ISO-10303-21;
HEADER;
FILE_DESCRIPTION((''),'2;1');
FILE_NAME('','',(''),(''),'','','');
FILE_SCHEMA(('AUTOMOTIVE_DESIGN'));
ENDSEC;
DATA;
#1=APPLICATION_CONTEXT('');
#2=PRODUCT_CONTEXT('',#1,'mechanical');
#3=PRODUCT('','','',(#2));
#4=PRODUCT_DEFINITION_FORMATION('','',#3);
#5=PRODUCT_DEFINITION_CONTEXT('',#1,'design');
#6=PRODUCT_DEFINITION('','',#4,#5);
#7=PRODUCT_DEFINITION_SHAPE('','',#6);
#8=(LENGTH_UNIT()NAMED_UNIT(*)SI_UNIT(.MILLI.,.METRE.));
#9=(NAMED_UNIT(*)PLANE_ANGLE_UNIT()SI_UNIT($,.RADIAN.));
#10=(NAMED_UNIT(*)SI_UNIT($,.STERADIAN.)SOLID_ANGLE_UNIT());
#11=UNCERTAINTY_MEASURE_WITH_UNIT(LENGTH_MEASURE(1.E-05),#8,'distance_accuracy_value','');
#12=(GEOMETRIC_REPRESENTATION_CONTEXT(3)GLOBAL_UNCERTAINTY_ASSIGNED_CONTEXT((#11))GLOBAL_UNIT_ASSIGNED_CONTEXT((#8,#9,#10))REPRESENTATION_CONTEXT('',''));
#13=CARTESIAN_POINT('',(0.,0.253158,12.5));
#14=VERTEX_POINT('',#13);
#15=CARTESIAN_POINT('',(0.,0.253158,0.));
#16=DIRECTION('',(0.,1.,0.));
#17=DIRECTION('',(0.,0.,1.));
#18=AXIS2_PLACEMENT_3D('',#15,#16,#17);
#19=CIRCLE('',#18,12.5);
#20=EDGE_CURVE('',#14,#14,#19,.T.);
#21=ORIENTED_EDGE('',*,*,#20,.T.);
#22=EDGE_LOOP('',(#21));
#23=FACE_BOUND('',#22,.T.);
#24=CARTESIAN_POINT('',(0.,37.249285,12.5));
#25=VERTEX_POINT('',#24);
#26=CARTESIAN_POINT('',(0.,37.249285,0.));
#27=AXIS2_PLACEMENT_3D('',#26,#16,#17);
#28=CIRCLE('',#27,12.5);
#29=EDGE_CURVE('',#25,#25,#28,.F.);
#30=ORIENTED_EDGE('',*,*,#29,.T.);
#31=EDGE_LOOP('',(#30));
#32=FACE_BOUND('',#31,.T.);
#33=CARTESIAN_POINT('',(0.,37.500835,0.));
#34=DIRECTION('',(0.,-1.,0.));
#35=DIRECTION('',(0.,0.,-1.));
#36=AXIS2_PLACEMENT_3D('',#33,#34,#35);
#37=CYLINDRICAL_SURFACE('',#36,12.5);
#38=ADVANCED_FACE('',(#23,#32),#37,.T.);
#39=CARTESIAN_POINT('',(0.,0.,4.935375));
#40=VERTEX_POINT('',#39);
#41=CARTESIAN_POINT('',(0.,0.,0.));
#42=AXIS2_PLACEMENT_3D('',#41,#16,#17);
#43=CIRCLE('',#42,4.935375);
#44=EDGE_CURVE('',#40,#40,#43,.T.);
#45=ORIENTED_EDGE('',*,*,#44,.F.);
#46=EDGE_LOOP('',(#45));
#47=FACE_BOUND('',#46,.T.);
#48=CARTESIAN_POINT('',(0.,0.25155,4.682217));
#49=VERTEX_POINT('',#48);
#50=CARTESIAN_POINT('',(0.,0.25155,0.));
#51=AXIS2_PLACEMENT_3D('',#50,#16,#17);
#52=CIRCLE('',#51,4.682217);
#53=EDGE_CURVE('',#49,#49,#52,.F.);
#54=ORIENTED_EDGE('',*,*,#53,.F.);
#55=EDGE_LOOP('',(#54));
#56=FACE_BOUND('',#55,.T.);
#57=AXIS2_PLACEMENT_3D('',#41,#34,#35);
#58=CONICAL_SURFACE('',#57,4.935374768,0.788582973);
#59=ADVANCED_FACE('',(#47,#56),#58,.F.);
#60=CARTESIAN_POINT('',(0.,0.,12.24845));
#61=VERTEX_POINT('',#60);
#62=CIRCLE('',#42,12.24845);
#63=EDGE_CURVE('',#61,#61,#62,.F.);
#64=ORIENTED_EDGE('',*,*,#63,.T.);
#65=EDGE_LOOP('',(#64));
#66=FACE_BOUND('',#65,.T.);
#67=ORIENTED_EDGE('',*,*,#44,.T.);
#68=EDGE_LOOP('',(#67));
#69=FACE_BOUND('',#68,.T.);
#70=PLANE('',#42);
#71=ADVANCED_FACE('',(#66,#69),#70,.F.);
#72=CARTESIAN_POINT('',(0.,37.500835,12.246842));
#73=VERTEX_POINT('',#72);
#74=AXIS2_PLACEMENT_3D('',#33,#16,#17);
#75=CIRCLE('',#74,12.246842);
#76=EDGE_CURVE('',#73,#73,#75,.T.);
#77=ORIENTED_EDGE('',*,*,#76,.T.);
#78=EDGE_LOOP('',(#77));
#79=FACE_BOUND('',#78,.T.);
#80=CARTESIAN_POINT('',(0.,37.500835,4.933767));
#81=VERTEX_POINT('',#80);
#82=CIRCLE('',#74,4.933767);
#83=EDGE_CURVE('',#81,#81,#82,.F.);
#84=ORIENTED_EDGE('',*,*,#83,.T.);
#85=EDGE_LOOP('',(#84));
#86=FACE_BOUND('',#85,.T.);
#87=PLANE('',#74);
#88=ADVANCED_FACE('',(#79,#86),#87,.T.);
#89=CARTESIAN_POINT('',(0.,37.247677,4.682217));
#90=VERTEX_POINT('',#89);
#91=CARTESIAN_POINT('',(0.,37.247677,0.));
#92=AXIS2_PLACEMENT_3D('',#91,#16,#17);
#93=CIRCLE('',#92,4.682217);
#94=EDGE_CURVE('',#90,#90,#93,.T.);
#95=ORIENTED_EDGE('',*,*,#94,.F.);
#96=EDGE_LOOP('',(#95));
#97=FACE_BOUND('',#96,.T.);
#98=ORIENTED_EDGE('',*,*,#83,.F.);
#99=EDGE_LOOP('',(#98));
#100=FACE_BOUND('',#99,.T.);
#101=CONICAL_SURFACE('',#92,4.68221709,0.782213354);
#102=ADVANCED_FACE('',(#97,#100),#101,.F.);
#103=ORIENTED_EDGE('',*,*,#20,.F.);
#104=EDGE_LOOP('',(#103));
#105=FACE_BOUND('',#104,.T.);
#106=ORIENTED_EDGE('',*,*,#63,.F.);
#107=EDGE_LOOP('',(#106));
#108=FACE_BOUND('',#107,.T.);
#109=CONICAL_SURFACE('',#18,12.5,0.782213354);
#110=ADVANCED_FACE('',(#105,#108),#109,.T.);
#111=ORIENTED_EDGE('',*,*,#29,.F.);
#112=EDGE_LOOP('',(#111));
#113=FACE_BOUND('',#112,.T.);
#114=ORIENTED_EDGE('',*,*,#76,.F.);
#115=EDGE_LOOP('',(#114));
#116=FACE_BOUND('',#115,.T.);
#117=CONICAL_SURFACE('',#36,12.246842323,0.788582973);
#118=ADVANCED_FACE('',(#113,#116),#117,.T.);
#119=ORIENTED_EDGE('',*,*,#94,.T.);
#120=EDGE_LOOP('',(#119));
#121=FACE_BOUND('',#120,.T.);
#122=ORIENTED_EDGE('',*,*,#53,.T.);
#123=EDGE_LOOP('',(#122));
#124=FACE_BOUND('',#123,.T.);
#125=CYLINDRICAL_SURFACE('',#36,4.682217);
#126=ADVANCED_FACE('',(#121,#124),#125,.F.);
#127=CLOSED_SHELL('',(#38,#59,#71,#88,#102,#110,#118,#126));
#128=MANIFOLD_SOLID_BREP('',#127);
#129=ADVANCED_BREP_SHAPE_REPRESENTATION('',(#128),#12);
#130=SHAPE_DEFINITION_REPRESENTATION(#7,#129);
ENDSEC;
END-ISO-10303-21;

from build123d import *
from OCP.BRepFilletAPI import BRepFilletAPI_MakeChamfer

# Parameters (mm, degrees)
SKETCH1_R           = 12.5
BOSS_EXTRUDE1_DEPTH = 37.500835042
SKETCH2_R           = 4.68221709
CUT_EXTRUDE1_DEPTH  = 42.458565205
CHAMFER1_SIZE       = 0.251550273
CHAMFER1_SIZE2      = 0.253157677


with BuildPart() as part:
    # Sketch1 → Boss-Extrude1 (new body)
    with BuildSketch(Plane(origin=(0, 0, 0), x_dir=(1, 0, 0), z_dir=(0, 1, 0))):
        Circle(SKETCH1_R)
    extrude(amount=BOSS_EXTRUDE1_DEPTH)

    # Sketch2 → Cut-Extrude1 (cut, through all)
    with BuildSketch(Plane(origin=(0, 0, 0), x_dir=(1, 0, 0), z_dir=(0, 1, 0))):
        Circle(SKETCH2_R)
    extrude(amount=CUT_EXTRUDE1_DEPTH, mode=Mode.SUBTRACT)

    # Chamfer1: one chamfer whose edges measure the first distance from different faces: ONE call of the kernel's chamfer builder (chamfer() names one face for all edges)
    chamfer1_edges_1 = [part.edges().sort_by_distance(p)[0] for p in [
        (-4.68221709, 37.500835042, 0),
    ]]
    chamfer1_side_1 = [part.faces().sort_by_distance(p)[0] for p in [
        (-12.146446609, 37.500835042, 0),
    ]]
    chamfer1_edges_2 = [part.edges().sort_by_distance(p)[0] for p in [
        (-4.68221709, 0, 0),
    ]]
    chamfer1_side_2 = [part.faces().sort_by_distance(p)[0] for p in [
        (-4.68221709, 18.750417521, 0),
    ]]
    chamfer1_edges_3 = [part.edges().sort_by_distance(p)[0] for p in [
        (-12.5, 0, 0),
    ]]
    chamfer1_side_3 = [part.faces().sort_by_distance(p)[0] for p in [
        (-12.146446609, 0, 0),
    ]]
    chamfer1_edges_4 = [part.edges().sort_by_distance(p)[0] for p in [
        (-12.5, 37.500835042, 0),
    ]]
    chamfer1_side_4 = [part.faces().sort_by_distance(p)[0] for p in [
        (-12.5, 18.750417521, 0),
    ]]
    chamfer1 = BRepFilletAPI_MakeChamfer(part.part.solid().wrapped)
    for e in chamfer1_edges_1:
        chamfer1.Add(CHAMFER1_SIZE, CHAMFER1_SIZE2, e.wrapped, chamfer1_side_1[0].wrapped)  # the first distance lies on this face
    for e in chamfer1_edges_2:
        chamfer1.Add(CHAMFER1_SIZE, CHAMFER1_SIZE2, e.wrapped, chamfer1_side_2[0].wrapped)  # the first distance lies on this face
    for e in chamfer1_edges_3:
        chamfer1.Add(CHAMFER1_SIZE, CHAMFER1_SIZE2, e.wrapped, chamfer1_side_3[0].wrapped)  # the first distance lies on this face
    for e in chamfer1_edges_4:
        chamfer1.Add(CHAMFER1_SIZE, CHAMFER1_SIZE2, e.wrapped, chamfer1_side_4[0].wrapped)  # the first distance lies on this face
    add(Compound.cast(chamfer1.Shape()), mode=Mode.REPLACE)


solid = part.part
